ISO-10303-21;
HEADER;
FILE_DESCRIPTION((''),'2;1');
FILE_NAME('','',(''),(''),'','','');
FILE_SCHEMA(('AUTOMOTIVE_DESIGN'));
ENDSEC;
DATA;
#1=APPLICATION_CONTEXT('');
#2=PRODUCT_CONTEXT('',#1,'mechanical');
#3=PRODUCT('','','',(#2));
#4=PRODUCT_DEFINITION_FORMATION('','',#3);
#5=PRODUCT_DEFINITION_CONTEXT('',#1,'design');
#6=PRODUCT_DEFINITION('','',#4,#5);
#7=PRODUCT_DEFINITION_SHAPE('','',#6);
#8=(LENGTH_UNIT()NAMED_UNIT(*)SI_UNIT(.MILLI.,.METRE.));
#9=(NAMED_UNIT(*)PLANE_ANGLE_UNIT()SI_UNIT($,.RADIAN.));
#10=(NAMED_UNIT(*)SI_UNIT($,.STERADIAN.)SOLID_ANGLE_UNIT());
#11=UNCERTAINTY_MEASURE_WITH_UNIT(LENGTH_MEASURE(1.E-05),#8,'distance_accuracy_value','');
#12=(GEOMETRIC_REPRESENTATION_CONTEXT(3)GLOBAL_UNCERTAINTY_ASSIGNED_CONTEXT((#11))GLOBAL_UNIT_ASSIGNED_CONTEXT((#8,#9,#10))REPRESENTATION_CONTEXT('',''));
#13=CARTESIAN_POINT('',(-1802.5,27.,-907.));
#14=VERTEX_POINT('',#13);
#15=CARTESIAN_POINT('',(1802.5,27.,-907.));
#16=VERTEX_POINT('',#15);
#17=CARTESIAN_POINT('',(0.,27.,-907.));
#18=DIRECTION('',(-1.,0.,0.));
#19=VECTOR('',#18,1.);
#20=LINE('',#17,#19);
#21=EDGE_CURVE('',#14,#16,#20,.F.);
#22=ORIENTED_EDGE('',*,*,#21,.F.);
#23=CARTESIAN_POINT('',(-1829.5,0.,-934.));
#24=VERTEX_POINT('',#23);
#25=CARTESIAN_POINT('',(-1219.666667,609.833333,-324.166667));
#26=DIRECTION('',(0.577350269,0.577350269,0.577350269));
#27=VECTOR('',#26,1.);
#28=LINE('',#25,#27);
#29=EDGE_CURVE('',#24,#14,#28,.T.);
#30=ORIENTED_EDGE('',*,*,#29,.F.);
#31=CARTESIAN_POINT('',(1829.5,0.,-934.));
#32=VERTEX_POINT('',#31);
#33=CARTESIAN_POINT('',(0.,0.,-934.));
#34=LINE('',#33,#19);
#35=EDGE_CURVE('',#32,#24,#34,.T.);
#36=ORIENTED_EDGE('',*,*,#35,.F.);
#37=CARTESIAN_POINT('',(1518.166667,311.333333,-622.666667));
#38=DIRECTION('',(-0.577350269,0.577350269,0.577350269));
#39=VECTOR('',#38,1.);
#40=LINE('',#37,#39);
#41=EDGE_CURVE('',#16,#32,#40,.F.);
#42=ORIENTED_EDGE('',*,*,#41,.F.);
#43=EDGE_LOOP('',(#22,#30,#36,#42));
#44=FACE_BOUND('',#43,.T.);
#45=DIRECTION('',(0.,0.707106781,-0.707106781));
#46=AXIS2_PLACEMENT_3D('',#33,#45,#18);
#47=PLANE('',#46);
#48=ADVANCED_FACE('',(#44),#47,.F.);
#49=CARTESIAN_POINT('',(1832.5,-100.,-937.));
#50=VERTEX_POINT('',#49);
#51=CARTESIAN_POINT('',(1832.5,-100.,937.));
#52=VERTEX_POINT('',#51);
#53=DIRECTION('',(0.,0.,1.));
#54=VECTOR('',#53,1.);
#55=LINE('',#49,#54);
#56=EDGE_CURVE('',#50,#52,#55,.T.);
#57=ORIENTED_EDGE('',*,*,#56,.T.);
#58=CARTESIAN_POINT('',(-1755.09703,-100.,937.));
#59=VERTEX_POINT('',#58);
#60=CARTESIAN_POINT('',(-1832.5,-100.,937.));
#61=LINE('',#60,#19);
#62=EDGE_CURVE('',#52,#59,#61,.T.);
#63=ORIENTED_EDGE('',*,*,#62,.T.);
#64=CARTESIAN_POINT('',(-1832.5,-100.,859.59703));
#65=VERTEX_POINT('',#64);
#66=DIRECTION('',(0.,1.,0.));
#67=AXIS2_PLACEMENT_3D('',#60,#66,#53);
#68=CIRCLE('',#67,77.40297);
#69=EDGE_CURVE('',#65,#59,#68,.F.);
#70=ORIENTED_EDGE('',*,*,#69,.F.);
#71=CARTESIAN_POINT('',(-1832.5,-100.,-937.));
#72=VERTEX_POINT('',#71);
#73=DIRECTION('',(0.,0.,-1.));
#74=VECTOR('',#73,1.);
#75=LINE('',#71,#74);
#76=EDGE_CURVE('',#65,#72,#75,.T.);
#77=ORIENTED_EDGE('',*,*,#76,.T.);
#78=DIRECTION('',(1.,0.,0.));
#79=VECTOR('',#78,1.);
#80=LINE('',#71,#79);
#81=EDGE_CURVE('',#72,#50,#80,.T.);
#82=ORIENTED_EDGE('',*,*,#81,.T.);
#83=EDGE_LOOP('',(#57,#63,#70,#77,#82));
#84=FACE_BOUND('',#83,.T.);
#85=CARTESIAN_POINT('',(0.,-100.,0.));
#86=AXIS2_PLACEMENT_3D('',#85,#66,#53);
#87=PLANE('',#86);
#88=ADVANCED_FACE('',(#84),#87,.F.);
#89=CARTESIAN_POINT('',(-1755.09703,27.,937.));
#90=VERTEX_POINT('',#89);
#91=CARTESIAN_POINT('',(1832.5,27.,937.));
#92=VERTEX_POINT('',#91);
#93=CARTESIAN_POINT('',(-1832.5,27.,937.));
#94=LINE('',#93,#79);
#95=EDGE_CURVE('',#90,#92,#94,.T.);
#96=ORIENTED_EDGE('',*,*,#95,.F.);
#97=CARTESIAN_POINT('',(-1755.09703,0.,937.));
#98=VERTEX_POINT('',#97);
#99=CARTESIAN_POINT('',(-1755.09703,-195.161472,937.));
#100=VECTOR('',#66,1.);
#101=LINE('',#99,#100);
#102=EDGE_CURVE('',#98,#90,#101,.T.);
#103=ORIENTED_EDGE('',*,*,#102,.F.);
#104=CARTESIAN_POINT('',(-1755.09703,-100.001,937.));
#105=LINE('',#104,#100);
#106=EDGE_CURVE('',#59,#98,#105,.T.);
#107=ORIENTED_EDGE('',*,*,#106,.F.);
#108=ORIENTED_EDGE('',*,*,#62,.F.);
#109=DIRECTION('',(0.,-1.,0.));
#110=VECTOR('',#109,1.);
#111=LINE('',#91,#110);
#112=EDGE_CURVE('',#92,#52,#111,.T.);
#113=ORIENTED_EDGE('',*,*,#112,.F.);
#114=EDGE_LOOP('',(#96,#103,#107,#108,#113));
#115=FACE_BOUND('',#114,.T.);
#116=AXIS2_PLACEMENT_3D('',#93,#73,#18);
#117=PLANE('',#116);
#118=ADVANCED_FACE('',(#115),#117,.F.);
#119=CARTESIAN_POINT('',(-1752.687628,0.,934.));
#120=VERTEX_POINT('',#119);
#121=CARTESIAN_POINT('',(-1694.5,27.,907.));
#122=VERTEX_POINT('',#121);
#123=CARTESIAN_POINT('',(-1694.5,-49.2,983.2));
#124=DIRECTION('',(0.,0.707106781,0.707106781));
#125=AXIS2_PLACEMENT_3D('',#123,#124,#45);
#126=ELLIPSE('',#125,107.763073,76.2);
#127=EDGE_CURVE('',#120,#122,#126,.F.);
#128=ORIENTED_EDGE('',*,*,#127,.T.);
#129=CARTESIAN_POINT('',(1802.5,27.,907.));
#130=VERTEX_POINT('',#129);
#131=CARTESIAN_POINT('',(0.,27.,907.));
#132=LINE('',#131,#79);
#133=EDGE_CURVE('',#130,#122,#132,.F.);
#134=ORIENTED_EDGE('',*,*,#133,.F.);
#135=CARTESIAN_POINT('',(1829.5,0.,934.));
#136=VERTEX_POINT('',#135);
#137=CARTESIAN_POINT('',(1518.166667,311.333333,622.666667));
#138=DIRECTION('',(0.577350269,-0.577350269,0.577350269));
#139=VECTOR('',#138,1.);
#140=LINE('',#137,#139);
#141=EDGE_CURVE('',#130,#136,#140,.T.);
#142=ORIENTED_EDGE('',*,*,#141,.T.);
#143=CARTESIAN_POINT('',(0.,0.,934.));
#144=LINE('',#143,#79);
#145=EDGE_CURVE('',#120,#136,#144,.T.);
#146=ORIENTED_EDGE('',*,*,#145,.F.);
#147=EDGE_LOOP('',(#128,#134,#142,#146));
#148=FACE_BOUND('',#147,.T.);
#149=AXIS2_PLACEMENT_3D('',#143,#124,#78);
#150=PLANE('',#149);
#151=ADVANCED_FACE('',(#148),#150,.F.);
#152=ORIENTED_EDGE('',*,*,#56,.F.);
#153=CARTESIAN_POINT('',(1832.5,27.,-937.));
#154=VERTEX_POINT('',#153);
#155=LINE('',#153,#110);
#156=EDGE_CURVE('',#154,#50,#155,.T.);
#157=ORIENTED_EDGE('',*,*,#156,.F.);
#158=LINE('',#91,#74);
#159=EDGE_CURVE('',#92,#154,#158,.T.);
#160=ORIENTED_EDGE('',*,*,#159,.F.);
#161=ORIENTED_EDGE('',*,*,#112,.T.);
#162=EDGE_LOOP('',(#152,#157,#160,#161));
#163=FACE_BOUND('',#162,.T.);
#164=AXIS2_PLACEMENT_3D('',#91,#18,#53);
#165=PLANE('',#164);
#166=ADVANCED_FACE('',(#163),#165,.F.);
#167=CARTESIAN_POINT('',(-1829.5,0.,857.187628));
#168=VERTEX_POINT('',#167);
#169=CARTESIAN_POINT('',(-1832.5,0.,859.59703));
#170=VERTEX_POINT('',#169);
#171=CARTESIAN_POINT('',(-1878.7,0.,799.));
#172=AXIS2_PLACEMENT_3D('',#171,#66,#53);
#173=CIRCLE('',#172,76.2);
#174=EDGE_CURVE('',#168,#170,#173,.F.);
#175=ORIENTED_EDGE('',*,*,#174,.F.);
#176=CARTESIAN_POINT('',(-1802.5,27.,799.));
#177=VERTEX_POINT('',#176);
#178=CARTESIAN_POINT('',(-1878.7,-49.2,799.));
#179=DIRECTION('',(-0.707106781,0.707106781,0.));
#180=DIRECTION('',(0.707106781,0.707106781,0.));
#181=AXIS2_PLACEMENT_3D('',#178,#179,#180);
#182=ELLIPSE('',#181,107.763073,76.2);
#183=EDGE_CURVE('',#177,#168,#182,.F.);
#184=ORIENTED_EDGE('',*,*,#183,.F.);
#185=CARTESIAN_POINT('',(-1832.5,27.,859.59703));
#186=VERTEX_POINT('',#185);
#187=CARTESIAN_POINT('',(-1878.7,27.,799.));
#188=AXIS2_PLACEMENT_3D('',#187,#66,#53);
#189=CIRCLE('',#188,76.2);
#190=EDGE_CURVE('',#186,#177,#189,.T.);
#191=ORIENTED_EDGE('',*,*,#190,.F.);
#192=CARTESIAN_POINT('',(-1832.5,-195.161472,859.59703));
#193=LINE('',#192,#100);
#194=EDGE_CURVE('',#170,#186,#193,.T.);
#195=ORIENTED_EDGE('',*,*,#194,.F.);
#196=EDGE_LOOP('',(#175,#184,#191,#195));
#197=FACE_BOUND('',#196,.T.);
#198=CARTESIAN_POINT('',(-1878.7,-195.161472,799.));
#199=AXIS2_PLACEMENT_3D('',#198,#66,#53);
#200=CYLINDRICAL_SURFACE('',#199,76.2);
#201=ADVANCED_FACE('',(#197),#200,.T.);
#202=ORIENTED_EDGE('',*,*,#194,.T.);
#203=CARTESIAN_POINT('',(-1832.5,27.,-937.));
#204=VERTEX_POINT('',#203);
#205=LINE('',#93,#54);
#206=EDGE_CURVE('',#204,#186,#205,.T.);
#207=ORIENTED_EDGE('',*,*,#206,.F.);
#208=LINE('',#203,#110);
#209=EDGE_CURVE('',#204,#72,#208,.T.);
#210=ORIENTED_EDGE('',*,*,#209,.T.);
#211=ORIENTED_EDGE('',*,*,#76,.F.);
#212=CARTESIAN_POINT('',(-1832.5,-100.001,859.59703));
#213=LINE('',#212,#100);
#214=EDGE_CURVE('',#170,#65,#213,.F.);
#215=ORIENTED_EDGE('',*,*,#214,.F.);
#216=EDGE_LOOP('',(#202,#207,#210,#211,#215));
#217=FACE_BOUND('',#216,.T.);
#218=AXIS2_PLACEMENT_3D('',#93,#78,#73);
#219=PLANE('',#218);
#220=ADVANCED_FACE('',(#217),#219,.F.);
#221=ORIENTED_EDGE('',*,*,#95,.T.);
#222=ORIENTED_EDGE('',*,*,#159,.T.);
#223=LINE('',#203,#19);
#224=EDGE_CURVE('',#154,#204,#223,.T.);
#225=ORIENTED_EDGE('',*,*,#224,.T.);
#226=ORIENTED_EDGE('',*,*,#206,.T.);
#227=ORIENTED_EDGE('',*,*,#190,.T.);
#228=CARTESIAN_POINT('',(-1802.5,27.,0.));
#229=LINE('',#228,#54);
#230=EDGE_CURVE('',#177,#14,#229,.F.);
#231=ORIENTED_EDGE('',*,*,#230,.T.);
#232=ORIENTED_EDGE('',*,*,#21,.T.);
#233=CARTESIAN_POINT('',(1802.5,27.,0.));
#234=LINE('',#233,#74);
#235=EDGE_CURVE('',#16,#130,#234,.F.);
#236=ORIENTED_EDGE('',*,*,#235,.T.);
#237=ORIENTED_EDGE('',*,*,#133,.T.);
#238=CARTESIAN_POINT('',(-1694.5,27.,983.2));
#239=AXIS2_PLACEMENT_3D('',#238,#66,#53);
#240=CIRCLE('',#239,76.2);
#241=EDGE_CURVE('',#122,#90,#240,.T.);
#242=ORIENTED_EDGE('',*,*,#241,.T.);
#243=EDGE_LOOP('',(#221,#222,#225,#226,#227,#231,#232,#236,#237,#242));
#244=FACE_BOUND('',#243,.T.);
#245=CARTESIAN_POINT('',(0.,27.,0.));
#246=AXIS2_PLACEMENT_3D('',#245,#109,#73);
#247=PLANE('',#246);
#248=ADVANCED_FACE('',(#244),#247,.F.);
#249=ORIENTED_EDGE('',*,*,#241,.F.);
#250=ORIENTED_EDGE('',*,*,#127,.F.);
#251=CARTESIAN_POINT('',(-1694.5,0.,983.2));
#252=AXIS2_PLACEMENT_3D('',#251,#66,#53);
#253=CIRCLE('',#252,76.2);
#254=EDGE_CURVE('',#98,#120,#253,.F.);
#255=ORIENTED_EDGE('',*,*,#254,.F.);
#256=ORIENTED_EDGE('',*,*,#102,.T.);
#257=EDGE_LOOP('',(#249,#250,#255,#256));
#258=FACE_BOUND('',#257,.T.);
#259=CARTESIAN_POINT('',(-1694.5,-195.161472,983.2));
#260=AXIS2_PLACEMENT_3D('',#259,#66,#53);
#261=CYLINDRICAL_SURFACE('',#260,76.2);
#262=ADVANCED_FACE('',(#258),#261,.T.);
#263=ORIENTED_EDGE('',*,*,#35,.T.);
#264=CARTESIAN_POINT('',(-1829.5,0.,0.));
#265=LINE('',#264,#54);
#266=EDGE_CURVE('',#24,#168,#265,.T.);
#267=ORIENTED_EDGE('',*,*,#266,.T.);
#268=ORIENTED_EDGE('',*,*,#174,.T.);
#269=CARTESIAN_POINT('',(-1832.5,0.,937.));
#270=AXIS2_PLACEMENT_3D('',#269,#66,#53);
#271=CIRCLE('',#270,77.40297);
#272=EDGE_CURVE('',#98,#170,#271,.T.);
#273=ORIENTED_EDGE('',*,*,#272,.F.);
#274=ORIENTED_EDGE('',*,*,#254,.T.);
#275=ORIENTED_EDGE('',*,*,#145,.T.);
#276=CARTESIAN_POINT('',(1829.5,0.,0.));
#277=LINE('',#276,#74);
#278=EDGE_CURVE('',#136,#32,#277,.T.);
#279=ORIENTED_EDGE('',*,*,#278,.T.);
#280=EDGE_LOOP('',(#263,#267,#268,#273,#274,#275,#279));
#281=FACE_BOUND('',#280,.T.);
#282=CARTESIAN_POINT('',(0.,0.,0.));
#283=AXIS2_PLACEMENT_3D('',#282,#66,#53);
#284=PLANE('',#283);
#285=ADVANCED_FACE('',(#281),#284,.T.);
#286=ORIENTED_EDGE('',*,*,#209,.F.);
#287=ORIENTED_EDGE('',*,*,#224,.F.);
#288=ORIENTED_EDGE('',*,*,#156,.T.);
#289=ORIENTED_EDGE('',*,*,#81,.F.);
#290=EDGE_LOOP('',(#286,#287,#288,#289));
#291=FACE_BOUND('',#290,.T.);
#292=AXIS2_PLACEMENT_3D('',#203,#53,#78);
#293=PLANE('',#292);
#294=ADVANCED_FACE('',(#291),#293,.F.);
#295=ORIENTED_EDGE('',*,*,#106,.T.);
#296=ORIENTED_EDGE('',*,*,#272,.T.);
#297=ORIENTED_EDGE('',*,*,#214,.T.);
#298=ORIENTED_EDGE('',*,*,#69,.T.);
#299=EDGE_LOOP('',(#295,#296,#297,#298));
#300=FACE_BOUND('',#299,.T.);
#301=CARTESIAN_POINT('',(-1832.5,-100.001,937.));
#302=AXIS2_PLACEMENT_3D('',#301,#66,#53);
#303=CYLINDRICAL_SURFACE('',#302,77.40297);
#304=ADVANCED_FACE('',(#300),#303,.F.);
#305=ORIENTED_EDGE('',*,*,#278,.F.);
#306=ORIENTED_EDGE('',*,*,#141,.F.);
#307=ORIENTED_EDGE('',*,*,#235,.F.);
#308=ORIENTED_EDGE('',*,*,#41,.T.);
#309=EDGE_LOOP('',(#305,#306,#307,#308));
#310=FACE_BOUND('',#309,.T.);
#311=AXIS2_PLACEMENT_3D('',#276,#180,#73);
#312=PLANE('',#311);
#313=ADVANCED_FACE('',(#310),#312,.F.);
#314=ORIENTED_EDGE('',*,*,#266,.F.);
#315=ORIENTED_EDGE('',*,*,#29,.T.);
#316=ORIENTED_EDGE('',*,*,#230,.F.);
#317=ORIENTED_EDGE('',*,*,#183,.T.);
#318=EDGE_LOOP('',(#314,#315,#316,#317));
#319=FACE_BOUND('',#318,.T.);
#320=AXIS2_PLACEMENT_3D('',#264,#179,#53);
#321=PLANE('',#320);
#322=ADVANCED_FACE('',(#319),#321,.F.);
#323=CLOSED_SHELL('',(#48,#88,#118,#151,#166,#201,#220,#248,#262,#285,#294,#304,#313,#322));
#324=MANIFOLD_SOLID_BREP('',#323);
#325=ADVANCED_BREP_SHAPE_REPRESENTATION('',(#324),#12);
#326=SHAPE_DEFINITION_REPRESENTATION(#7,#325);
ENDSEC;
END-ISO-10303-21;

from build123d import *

# Parameters (mm, degrees)
SZKIC4_W                    = 3665
SZKIC4_H                    = 1874
SZKIC4_W_2                  = 3569
SZKIC4_H_2                  = 1778
DODANIE_WYCI_GNI_CIE3_DEPTH = 27
SZKIC5_W                    = 3665
SZKIC5_H                    = 1874
DODANIE_WYCI_GNI_CIE4_DEPTH = 100
WYTNIJ_WYCI_GNI_CIE1_DEPTH  = 27
WYTNIJ_WYCI_GNI_CIE2_REACH  = 2062.589
SZKIC7_R                    = 77.40297037


with BuildPart() as part:
    # Szkic4 → Dodanie-wyciągnięcie3 (new body)
    with BuildSketch(Plane(origin=(0, 0, 0), x_dir=(1, 0, 0), z_dir=(0, 1, 0))):
        Rectangle(SZKIC4_W, SZKIC4_H)
        Rectangle(SZKIC4_W_2, SZKIC4_H_2, mode=Mode.SUBTRACT)
    extrude(amount=DODANIE_WYCI_GNI_CIE3_DEPTH)

    # Sfazowanie1
    # the kernel refuses this chamfer: 45 mm, written as the material it takes off along each edge
    with BuildSketch(Plane(origin=(-1784.5, 0, 889), x_dir=(0, 0.9996219169112966, -0.027495876610587087), z_dir=(1, 0, 0)), Plane(origin=(1784.5, 0, -889), x_dir=(0, 0.9996219169112966, 0.027495876610587087), z_dir=(-1, 0, 0))) as sfazowanie1_piece_1:
        with BuildLine():
            Line((46.290293783, 0), (-2.54462197, 46.220300708))
            Line((-2.54462197, 46.220300708), (-3.444281695, 46.19555442))
            ThreePointArc((-3.444281695, 46.19555442), (-1.535815218, 23.102902334), (-0.899659725, -0.024746289))
            Line((-0.899659725, -0.024746289), (0.024746289, -0.899659725))
            ThreePointArc((0.024746289, -0.899659725), (23.152394912, -0.263504233), (46.315040072, -0.899659725))
            Line((46.315040072, -0.899659725), (46.290293783, 0))
        make_face()
    extrude(amount=3569, mode=Mode.SUBTRACT)
    with BuildSketch(Plane(origin=(-1784.5, 0, -889), x_dir=(0.027495876610587087, 0.9996219169112966, 0), z_dir=(0, 0, 1)), Plane(origin=(1784.5, 0, 889), x_dir=(-0.027495876610587087, 0.9996219169112966, 0), z_dir=(0, 0, -1))) as sfazowanie1_piece_2:
        with BuildLine():
            Line((46.290293783, 0), (-2.54462197, 46.220300708))
            Line((-2.54462197, 46.220300708), (-3.444281695, 46.19555442))
            ThreePointArc((-3.444281695, 46.19555442), (-1.535815218, 23.102902334), (-0.899659725, -0.024746289))
            Line((-0.899659725, -0.024746289), (0.024746289, -0.899659725))
            ThreePointArc((0.024746289, -0.899659725), (23.152394912, -0.263504233), (46.315040072, -0.899659725))
            Line((46.315040072, -0.899659725), (46.290293783, 0))
        make_face()
    extrude(amount=1778, mode=Mode.SUBTRACT)
    with BuildSketch(Plane(origin=(-1784.5, 0, -889), x_dir=(0.027495876610587087, 0.9996219169112966, 0), z_dir=(0, 0, 1))) as sfazowanie1_piece_3a_section:
        with BuildLine():
            Line((46.290293783, 0), (-2.54462197, 46.220300708))
            Line((-2.54462197, 46.220300708), (-3.444281695, 46.19555442))
            ThreePointArc((-3.444281695, 46.19555442), (-1.535815218, 23.102902334), (-0.899659725, -0.024746289))
            Line((-0.899659725, -0.024746289), (0.024746289, -0.899659725))
            ThreePointArc((0.024746289, -0.899659725), (23.152394912, -0.263504233), (46.315040072, -0.899659725))
            Line((46.315040072, -0.899659725), (46.290293783, 0))
        make_face()
    sfazowanie1_piece_3a = extrude(amount=1893.725734458, mode=Mode.PRIVATE)
    sfazowanie1_piece_3a = split(sfazowanie1_piece_3a, bisect_by=Plane(origin=(-1799.340713206, 14.840713206, 889), z_dir=(0, 0, 1)), keep=Keep.TOP, mode=Mode.PRIVATE)
    with BuildSketch(Plane(origin=(-1900.225734458, 0, 889), x_dir=(0, 0.9996219169112966, -0.027495876610587087), z_dir=(1, 0, 0))) as sfazowanie1_piece_3b_section:
        with BuildLine():
            Line((46.290293783, 0), (-2.54462197, 46.220300708))
            Line((-2.54462197, 46.220300708), (-3.444281695, 46.19555442))
            ThreePointArc((-3.444281695, 46.19555442), (-1.535815218, 23.102902334), (-0.899659725, -0.024746289))
            Line((-0.899659725, -0.024746289), (0.024746289, -0.899659725))
            ThreePointArc((0.024746289, -0.899659725), (23.152394912, -0.263504233), (46.315040072, -0.899659725))
            Line((46.315040072, -0.899659725), (46.290293783, 0))
        make_face()
    sfazowanie1_piece_3b = extrude(amount=3684.725734458, mode=Mode.PRIVATE)
    sfazowanie1_piece_3b = split(sfazowanie1_piece_3b, bisect_by=Plane(origin=(-1784.5, 14.840713206, 903.840713206), z_dir=(-1, 0, 0)), keep=Keep.TOP, mode=Mode.PRIVATE)
    sfazowanie1_piece_3 = sfazowanie1_piece_3a & sfazowanie1_piece_3b
    add(sfazowanie1_piece_3, mode=Mode.SUBTRACT)
    with BuildSketch(Plane(origin=(1784.5, 0, 1004.725734458), x_dir=(-0.027495876610587087, 0.9996219169112966, 0), z_dir=(0, 0, -1))) as sfazowanie1_piece_4a_section:
        with BuildLine():
            Line((46.290293783, 0), (-2.54462197, 46.220300708))
            Line((-2.54462197, 46.220300708), (-3.444281695, 46.19555442))
            ThreePointArc((-3.444281695, 46.19555442), (-1.535815218, 23.102902334), (-0.899659725, -0.024746289))
            Line((-0.899659725, -0.024746289), (0.024746289, -0.899659725))
            ThreePointArc((0.024746289, -0.899659725), (23.152394912, -0.263504233), (46.315040072, -0.899659725))
            Line((46.315040072, -0.899659725), (46.290293783, 0))
        make_face()
    sfazowanie1_piece_4a = extrude(amount=1893.725734458, mode=Mode.PRIVATE)
    sfazowanie1_piece_4a = split(sfazowanie1_piece_4a, bisect_by=Plane(origin=(1799.340713206, 14.840713206, 889), z_dir=(0, 0, 1)), keep=Keep.TOP, mode=Mode.PRIVATE)
    with BuildSketch(Plane(origin=(-1784.5, 0, 889), x_dir=(0, 0.9996219169112966, -0.027495876610587087), z_dir=(1, 0, 0))) as sfazowanie1_piece_4b_section:
        with BuildLine():
            Line((46.290293783, 0), (-2.54462197, 46.220300708))
            Line((-2.54462197, 46.220300708), (-3.444281695, 46.19555442))
            ThreePointArc((-3.444281695, 46.19555442), (-1.535815218, 23.102902334), (-0.899659725, -0.024746289))
            Line((-0.899659725, -0.024746289), (0.024746289, -0.899659725))
            ThreePointArc((0.024746289, -0.899659725), (23.152394912, -0.263504233), (46.315040072, -0.899659725))
            Line((46.315040072, -0.899659725), (46.290293783, 0))
        make_face()
    sfazowanie1_piece_4b = extrude(amount=3684.725734458, mode=Mode.PRIVATE)
    sfazowanie1_piece_4b = split(sfazowanie1_piece_4b, bisect_by=Plane(origin=(1784.5, 14.840713206, 903.840713206), z_dir=(1, 0, 0)), keep=Keep.TOP, mode=Mode.PRIVATE)
    sfazowanie1_piece_4 = sfazowanie1_piece_4a & sfazowanie1_piece_4b
    add(sfazowanie1_piece_4, mode=Mode.SUBTRACT)
    with BuildSketch(Plane(origin=(-1784.5, 0, -1004.725734458), x_dir=(0.027495876610587087, 0.9996219169112966, 0), z_dir=(0, 0, 1))) as sfazowanie1_piece_5a_section:
        with BuildLine():
            Line((46.290293783, 0), (-2.54462197, 46.220300708))
            Line((-2.54462197, 46.220300708), (-3.444281695, 46.19555442))
            ThreePointArc((-3.444281695, 46.19555442), (-1.535815218, 23.102902334), (-0.899659725, -0.024746289))
            Line((-0.899659725, -0.024746289), (0.024746289, -0.899659725))
            ThreePointArc((0.024746289, -0.899659725), (23.152394912, -0.263504233), (46.315040072, -0.899659725))
            Line((46.315040072, -0.899659725), (46.290293783, 0))
        make_face()
    sfazowanie1_piece_5a = extrude(amount=1893.725734458, mode=Mode.PRIVATE)
    sfazowanie1_piece_5a = split(sfazowanie1_piece_5a, bisect_by=Plane(origin=(-1799.340713206, 14.840713206, -889), z_dir=(0, 0, -1)), keep=Keep.TOP, mode=Mode.PRIVATE)
    with BuildSketch(Plane(origin=(1784.5, 0, -889), x_dir=(0, 0.9996219169112966, 0.027495876610587087), z_dir=(-1, 0, 0))) as sfazowanie1_piece_5b_section:
        with BuildLine():
            Line((46.290293783, 0), (-2.54462197, 46.220300708))
            Line((-2.54462197, 46.220300708), (-3.444281695, 46.19555442))
            ThreePointArc((-3.444281695, 46.19555442), (-1.535815218, 23.102902334), (-0.899659725, -0.024746289))
            Line((-0.899659725, -0.024746289), (0.024746289, -0.899659725))
            ThreePointArc((0.024746289, -0.899659725), (23.152394912, -0.263504233), (46.315040072, -0.899659725))
            Line((46.315040072, -0.899659725), (46.290293783, 0))
        make_face()
    sfazowanie1_piece_5b = extrude(amount=3684.725734458, mode=Mode.PRIVATE)
    sfazowanie1_piece_5b = split(sfazowanie1_piece_5b, bisect_by=Plane(origin=(-1784.5, 14.840713206, -903.840713206), z_dir=(-1, 0, 0)), keep=Keep.TOP, mode=Mode.PRIVATE)
    sfazowanie1_piece_5 = sfazowanie1_piece_5a & sfazowanie1_piece_5b
    add(sfazowanie1_piece_5, mode=Mode.SUBTRACT)
    with BuildSketch(Plane(origin=(1900.225734458, 0, -889), x_dir=(0, 0.9996219169112966, 0.027495876610587087), z_dir=(-1, 0, 0))) as sfazowanie1_piece_6a_section:
        with BuildLine():
            Line((46.290293783, 0), (-2.54462197, 46.220300708))
            Line((-2.54462197, 46.220300708), (-3.444281695, 46.19555442))
            ThreePointArc((-3.444281695, 46.19555442), (-1.535815218, 23.102902334), (-0.899659725, -0.024746289))
            Line((-0.899659725, -0.024746289), (0.024746289, -0.899659725))
            ThreePointArc((0.024746289, -0.899659725), (23.152394912, -0.263504233), (46.315040072, -0.899659725))
            Line((46.315040072, -0.899659725), (46.290293783, 0))
        make_face()
    sfazowanie1_piece_6a = extrude(amount=3684.725734458, mode=Mode.PRIVATE)
    sfazowanie1_piece_6a = split(sfazowanie1_piece_6a, bisect_by=Plane(origin=(1784.5, 14.840713206, -903.840713206), z_dir=(1, 0, 0)), keep=Keep.TOP, mode=Mode.PRIVATE)
    with BuildSketch(Plane(origin=(1784.5, 0, 889), x_dir=(-0.027495876610587087, 0.9996219169112966, 0), z_dir=(0, 0, -1))) as sfazowanie1_piece_6b_section:
        with BuildLine():
            Line((46.290293783, 0), (-2.54462197, 46.220300708))
            Line((-2.54462197, 46.220300708), (-3.444281695, 46.19555442))
            ThreePointArc((-3.444281695, 46.19555442), (-1.535815218, 23.102902334), (-0.899659725, -0.024746289))
            Line((-0.899659725, -0.024746289), (0.024746289, -0.899659725))
            ThreePointArc((0.024746289, -0.899659725), (23.152394912, -0.263504233), (46.315040072, -0.899659725))
            Line((46.315040072, -0.899659725), (46.290293783, 0))
        make_face()
    sfazowanie1_piece_6b = extrude(amount=1893.725734458, mode=Mode.PRIVATE)
    sfazowanie1_piece_6b = split(sfazowanie1_piece_6b, bisect_by=Plane(origin=(1799.340713206, 14.840713206, -889), z_dir=(0, 0, -1)), keep=Keep.TOP, mode=Mode.PRIVATE)
    sfazowanie1_piece_6 = sfazowanie1_piece_6a & sfazowanie1_piece_6b
    add(sfazowanie1_piece_6, mode=Mode.SUBTRACT)

    # Szkic5 → Dodanie-wyciągnięcie4 (add)
    with BuildSketch(Plane.XZ):
        Rectangle(SZKIC5_W, SZKIC5_H)
    extrude(amount=DODANIE_WYCI_GNI_CIE4_DEPTH)

    # Szkic6 → Wytnij-wyciągnięcie1 (cut)
    with BuildSketch(Plane(origin=(0, 27, 0), x_dir=(1, 0, 0), z_dir=(0, 1, 0))):
        with BuildLine():
            Line((-1832.5, -859.59702963), (-1832.5, -937))
            Line((-1832.5, -937), (-1755.09702963, -937))
            ThreePointArc((-1755.09702963, -937), (-1728.308283009, -914.910615759), (-1694.5, -907))
            Line((-1694.5, -907), (-1802.5, -907))
            Line((-1802.5, -907), (-1802.5, -799))
            ThreePointArc((-1802.5, -799), (-1810.410615759, -832.808283009), (-1832.5, -859.59702963))
        make_face()
    extrude(amount=-WYTNIJ_WYCI_GNI_CIE1_DEPTH, mode=Mode.SUBTRACT)

    # Szkic7 → Wytnij-wyciągnięcie2 (cut, up to next)
    with BuildSketch(Plane(origin=(0, 0, 0), x_dir=(1, 0, 0), z_dir=(0, 1, 0)), mode=Mode.PRIVATE) as wytnij_wyci_gni_cie2_sk1:
        with Locations((-1832.5, -937)):
            Circle(SZKIC7_R)
    wytnij_wyci_gni_cie2_tool1 = extrude(wytnij_wyci_gni_cie2_sk1.sketch, amount=-WYTNIJ_WYCI_GNI_CIE2_REACH, mode=Mode.PRIVATE) & part.part
    add(wytnij_wyci_gni_cie2_tool1.solids().sort_by_distance((-1832.5, 0, 937))[0], mode=Mode.SUBTRACT)


solid = part.part
